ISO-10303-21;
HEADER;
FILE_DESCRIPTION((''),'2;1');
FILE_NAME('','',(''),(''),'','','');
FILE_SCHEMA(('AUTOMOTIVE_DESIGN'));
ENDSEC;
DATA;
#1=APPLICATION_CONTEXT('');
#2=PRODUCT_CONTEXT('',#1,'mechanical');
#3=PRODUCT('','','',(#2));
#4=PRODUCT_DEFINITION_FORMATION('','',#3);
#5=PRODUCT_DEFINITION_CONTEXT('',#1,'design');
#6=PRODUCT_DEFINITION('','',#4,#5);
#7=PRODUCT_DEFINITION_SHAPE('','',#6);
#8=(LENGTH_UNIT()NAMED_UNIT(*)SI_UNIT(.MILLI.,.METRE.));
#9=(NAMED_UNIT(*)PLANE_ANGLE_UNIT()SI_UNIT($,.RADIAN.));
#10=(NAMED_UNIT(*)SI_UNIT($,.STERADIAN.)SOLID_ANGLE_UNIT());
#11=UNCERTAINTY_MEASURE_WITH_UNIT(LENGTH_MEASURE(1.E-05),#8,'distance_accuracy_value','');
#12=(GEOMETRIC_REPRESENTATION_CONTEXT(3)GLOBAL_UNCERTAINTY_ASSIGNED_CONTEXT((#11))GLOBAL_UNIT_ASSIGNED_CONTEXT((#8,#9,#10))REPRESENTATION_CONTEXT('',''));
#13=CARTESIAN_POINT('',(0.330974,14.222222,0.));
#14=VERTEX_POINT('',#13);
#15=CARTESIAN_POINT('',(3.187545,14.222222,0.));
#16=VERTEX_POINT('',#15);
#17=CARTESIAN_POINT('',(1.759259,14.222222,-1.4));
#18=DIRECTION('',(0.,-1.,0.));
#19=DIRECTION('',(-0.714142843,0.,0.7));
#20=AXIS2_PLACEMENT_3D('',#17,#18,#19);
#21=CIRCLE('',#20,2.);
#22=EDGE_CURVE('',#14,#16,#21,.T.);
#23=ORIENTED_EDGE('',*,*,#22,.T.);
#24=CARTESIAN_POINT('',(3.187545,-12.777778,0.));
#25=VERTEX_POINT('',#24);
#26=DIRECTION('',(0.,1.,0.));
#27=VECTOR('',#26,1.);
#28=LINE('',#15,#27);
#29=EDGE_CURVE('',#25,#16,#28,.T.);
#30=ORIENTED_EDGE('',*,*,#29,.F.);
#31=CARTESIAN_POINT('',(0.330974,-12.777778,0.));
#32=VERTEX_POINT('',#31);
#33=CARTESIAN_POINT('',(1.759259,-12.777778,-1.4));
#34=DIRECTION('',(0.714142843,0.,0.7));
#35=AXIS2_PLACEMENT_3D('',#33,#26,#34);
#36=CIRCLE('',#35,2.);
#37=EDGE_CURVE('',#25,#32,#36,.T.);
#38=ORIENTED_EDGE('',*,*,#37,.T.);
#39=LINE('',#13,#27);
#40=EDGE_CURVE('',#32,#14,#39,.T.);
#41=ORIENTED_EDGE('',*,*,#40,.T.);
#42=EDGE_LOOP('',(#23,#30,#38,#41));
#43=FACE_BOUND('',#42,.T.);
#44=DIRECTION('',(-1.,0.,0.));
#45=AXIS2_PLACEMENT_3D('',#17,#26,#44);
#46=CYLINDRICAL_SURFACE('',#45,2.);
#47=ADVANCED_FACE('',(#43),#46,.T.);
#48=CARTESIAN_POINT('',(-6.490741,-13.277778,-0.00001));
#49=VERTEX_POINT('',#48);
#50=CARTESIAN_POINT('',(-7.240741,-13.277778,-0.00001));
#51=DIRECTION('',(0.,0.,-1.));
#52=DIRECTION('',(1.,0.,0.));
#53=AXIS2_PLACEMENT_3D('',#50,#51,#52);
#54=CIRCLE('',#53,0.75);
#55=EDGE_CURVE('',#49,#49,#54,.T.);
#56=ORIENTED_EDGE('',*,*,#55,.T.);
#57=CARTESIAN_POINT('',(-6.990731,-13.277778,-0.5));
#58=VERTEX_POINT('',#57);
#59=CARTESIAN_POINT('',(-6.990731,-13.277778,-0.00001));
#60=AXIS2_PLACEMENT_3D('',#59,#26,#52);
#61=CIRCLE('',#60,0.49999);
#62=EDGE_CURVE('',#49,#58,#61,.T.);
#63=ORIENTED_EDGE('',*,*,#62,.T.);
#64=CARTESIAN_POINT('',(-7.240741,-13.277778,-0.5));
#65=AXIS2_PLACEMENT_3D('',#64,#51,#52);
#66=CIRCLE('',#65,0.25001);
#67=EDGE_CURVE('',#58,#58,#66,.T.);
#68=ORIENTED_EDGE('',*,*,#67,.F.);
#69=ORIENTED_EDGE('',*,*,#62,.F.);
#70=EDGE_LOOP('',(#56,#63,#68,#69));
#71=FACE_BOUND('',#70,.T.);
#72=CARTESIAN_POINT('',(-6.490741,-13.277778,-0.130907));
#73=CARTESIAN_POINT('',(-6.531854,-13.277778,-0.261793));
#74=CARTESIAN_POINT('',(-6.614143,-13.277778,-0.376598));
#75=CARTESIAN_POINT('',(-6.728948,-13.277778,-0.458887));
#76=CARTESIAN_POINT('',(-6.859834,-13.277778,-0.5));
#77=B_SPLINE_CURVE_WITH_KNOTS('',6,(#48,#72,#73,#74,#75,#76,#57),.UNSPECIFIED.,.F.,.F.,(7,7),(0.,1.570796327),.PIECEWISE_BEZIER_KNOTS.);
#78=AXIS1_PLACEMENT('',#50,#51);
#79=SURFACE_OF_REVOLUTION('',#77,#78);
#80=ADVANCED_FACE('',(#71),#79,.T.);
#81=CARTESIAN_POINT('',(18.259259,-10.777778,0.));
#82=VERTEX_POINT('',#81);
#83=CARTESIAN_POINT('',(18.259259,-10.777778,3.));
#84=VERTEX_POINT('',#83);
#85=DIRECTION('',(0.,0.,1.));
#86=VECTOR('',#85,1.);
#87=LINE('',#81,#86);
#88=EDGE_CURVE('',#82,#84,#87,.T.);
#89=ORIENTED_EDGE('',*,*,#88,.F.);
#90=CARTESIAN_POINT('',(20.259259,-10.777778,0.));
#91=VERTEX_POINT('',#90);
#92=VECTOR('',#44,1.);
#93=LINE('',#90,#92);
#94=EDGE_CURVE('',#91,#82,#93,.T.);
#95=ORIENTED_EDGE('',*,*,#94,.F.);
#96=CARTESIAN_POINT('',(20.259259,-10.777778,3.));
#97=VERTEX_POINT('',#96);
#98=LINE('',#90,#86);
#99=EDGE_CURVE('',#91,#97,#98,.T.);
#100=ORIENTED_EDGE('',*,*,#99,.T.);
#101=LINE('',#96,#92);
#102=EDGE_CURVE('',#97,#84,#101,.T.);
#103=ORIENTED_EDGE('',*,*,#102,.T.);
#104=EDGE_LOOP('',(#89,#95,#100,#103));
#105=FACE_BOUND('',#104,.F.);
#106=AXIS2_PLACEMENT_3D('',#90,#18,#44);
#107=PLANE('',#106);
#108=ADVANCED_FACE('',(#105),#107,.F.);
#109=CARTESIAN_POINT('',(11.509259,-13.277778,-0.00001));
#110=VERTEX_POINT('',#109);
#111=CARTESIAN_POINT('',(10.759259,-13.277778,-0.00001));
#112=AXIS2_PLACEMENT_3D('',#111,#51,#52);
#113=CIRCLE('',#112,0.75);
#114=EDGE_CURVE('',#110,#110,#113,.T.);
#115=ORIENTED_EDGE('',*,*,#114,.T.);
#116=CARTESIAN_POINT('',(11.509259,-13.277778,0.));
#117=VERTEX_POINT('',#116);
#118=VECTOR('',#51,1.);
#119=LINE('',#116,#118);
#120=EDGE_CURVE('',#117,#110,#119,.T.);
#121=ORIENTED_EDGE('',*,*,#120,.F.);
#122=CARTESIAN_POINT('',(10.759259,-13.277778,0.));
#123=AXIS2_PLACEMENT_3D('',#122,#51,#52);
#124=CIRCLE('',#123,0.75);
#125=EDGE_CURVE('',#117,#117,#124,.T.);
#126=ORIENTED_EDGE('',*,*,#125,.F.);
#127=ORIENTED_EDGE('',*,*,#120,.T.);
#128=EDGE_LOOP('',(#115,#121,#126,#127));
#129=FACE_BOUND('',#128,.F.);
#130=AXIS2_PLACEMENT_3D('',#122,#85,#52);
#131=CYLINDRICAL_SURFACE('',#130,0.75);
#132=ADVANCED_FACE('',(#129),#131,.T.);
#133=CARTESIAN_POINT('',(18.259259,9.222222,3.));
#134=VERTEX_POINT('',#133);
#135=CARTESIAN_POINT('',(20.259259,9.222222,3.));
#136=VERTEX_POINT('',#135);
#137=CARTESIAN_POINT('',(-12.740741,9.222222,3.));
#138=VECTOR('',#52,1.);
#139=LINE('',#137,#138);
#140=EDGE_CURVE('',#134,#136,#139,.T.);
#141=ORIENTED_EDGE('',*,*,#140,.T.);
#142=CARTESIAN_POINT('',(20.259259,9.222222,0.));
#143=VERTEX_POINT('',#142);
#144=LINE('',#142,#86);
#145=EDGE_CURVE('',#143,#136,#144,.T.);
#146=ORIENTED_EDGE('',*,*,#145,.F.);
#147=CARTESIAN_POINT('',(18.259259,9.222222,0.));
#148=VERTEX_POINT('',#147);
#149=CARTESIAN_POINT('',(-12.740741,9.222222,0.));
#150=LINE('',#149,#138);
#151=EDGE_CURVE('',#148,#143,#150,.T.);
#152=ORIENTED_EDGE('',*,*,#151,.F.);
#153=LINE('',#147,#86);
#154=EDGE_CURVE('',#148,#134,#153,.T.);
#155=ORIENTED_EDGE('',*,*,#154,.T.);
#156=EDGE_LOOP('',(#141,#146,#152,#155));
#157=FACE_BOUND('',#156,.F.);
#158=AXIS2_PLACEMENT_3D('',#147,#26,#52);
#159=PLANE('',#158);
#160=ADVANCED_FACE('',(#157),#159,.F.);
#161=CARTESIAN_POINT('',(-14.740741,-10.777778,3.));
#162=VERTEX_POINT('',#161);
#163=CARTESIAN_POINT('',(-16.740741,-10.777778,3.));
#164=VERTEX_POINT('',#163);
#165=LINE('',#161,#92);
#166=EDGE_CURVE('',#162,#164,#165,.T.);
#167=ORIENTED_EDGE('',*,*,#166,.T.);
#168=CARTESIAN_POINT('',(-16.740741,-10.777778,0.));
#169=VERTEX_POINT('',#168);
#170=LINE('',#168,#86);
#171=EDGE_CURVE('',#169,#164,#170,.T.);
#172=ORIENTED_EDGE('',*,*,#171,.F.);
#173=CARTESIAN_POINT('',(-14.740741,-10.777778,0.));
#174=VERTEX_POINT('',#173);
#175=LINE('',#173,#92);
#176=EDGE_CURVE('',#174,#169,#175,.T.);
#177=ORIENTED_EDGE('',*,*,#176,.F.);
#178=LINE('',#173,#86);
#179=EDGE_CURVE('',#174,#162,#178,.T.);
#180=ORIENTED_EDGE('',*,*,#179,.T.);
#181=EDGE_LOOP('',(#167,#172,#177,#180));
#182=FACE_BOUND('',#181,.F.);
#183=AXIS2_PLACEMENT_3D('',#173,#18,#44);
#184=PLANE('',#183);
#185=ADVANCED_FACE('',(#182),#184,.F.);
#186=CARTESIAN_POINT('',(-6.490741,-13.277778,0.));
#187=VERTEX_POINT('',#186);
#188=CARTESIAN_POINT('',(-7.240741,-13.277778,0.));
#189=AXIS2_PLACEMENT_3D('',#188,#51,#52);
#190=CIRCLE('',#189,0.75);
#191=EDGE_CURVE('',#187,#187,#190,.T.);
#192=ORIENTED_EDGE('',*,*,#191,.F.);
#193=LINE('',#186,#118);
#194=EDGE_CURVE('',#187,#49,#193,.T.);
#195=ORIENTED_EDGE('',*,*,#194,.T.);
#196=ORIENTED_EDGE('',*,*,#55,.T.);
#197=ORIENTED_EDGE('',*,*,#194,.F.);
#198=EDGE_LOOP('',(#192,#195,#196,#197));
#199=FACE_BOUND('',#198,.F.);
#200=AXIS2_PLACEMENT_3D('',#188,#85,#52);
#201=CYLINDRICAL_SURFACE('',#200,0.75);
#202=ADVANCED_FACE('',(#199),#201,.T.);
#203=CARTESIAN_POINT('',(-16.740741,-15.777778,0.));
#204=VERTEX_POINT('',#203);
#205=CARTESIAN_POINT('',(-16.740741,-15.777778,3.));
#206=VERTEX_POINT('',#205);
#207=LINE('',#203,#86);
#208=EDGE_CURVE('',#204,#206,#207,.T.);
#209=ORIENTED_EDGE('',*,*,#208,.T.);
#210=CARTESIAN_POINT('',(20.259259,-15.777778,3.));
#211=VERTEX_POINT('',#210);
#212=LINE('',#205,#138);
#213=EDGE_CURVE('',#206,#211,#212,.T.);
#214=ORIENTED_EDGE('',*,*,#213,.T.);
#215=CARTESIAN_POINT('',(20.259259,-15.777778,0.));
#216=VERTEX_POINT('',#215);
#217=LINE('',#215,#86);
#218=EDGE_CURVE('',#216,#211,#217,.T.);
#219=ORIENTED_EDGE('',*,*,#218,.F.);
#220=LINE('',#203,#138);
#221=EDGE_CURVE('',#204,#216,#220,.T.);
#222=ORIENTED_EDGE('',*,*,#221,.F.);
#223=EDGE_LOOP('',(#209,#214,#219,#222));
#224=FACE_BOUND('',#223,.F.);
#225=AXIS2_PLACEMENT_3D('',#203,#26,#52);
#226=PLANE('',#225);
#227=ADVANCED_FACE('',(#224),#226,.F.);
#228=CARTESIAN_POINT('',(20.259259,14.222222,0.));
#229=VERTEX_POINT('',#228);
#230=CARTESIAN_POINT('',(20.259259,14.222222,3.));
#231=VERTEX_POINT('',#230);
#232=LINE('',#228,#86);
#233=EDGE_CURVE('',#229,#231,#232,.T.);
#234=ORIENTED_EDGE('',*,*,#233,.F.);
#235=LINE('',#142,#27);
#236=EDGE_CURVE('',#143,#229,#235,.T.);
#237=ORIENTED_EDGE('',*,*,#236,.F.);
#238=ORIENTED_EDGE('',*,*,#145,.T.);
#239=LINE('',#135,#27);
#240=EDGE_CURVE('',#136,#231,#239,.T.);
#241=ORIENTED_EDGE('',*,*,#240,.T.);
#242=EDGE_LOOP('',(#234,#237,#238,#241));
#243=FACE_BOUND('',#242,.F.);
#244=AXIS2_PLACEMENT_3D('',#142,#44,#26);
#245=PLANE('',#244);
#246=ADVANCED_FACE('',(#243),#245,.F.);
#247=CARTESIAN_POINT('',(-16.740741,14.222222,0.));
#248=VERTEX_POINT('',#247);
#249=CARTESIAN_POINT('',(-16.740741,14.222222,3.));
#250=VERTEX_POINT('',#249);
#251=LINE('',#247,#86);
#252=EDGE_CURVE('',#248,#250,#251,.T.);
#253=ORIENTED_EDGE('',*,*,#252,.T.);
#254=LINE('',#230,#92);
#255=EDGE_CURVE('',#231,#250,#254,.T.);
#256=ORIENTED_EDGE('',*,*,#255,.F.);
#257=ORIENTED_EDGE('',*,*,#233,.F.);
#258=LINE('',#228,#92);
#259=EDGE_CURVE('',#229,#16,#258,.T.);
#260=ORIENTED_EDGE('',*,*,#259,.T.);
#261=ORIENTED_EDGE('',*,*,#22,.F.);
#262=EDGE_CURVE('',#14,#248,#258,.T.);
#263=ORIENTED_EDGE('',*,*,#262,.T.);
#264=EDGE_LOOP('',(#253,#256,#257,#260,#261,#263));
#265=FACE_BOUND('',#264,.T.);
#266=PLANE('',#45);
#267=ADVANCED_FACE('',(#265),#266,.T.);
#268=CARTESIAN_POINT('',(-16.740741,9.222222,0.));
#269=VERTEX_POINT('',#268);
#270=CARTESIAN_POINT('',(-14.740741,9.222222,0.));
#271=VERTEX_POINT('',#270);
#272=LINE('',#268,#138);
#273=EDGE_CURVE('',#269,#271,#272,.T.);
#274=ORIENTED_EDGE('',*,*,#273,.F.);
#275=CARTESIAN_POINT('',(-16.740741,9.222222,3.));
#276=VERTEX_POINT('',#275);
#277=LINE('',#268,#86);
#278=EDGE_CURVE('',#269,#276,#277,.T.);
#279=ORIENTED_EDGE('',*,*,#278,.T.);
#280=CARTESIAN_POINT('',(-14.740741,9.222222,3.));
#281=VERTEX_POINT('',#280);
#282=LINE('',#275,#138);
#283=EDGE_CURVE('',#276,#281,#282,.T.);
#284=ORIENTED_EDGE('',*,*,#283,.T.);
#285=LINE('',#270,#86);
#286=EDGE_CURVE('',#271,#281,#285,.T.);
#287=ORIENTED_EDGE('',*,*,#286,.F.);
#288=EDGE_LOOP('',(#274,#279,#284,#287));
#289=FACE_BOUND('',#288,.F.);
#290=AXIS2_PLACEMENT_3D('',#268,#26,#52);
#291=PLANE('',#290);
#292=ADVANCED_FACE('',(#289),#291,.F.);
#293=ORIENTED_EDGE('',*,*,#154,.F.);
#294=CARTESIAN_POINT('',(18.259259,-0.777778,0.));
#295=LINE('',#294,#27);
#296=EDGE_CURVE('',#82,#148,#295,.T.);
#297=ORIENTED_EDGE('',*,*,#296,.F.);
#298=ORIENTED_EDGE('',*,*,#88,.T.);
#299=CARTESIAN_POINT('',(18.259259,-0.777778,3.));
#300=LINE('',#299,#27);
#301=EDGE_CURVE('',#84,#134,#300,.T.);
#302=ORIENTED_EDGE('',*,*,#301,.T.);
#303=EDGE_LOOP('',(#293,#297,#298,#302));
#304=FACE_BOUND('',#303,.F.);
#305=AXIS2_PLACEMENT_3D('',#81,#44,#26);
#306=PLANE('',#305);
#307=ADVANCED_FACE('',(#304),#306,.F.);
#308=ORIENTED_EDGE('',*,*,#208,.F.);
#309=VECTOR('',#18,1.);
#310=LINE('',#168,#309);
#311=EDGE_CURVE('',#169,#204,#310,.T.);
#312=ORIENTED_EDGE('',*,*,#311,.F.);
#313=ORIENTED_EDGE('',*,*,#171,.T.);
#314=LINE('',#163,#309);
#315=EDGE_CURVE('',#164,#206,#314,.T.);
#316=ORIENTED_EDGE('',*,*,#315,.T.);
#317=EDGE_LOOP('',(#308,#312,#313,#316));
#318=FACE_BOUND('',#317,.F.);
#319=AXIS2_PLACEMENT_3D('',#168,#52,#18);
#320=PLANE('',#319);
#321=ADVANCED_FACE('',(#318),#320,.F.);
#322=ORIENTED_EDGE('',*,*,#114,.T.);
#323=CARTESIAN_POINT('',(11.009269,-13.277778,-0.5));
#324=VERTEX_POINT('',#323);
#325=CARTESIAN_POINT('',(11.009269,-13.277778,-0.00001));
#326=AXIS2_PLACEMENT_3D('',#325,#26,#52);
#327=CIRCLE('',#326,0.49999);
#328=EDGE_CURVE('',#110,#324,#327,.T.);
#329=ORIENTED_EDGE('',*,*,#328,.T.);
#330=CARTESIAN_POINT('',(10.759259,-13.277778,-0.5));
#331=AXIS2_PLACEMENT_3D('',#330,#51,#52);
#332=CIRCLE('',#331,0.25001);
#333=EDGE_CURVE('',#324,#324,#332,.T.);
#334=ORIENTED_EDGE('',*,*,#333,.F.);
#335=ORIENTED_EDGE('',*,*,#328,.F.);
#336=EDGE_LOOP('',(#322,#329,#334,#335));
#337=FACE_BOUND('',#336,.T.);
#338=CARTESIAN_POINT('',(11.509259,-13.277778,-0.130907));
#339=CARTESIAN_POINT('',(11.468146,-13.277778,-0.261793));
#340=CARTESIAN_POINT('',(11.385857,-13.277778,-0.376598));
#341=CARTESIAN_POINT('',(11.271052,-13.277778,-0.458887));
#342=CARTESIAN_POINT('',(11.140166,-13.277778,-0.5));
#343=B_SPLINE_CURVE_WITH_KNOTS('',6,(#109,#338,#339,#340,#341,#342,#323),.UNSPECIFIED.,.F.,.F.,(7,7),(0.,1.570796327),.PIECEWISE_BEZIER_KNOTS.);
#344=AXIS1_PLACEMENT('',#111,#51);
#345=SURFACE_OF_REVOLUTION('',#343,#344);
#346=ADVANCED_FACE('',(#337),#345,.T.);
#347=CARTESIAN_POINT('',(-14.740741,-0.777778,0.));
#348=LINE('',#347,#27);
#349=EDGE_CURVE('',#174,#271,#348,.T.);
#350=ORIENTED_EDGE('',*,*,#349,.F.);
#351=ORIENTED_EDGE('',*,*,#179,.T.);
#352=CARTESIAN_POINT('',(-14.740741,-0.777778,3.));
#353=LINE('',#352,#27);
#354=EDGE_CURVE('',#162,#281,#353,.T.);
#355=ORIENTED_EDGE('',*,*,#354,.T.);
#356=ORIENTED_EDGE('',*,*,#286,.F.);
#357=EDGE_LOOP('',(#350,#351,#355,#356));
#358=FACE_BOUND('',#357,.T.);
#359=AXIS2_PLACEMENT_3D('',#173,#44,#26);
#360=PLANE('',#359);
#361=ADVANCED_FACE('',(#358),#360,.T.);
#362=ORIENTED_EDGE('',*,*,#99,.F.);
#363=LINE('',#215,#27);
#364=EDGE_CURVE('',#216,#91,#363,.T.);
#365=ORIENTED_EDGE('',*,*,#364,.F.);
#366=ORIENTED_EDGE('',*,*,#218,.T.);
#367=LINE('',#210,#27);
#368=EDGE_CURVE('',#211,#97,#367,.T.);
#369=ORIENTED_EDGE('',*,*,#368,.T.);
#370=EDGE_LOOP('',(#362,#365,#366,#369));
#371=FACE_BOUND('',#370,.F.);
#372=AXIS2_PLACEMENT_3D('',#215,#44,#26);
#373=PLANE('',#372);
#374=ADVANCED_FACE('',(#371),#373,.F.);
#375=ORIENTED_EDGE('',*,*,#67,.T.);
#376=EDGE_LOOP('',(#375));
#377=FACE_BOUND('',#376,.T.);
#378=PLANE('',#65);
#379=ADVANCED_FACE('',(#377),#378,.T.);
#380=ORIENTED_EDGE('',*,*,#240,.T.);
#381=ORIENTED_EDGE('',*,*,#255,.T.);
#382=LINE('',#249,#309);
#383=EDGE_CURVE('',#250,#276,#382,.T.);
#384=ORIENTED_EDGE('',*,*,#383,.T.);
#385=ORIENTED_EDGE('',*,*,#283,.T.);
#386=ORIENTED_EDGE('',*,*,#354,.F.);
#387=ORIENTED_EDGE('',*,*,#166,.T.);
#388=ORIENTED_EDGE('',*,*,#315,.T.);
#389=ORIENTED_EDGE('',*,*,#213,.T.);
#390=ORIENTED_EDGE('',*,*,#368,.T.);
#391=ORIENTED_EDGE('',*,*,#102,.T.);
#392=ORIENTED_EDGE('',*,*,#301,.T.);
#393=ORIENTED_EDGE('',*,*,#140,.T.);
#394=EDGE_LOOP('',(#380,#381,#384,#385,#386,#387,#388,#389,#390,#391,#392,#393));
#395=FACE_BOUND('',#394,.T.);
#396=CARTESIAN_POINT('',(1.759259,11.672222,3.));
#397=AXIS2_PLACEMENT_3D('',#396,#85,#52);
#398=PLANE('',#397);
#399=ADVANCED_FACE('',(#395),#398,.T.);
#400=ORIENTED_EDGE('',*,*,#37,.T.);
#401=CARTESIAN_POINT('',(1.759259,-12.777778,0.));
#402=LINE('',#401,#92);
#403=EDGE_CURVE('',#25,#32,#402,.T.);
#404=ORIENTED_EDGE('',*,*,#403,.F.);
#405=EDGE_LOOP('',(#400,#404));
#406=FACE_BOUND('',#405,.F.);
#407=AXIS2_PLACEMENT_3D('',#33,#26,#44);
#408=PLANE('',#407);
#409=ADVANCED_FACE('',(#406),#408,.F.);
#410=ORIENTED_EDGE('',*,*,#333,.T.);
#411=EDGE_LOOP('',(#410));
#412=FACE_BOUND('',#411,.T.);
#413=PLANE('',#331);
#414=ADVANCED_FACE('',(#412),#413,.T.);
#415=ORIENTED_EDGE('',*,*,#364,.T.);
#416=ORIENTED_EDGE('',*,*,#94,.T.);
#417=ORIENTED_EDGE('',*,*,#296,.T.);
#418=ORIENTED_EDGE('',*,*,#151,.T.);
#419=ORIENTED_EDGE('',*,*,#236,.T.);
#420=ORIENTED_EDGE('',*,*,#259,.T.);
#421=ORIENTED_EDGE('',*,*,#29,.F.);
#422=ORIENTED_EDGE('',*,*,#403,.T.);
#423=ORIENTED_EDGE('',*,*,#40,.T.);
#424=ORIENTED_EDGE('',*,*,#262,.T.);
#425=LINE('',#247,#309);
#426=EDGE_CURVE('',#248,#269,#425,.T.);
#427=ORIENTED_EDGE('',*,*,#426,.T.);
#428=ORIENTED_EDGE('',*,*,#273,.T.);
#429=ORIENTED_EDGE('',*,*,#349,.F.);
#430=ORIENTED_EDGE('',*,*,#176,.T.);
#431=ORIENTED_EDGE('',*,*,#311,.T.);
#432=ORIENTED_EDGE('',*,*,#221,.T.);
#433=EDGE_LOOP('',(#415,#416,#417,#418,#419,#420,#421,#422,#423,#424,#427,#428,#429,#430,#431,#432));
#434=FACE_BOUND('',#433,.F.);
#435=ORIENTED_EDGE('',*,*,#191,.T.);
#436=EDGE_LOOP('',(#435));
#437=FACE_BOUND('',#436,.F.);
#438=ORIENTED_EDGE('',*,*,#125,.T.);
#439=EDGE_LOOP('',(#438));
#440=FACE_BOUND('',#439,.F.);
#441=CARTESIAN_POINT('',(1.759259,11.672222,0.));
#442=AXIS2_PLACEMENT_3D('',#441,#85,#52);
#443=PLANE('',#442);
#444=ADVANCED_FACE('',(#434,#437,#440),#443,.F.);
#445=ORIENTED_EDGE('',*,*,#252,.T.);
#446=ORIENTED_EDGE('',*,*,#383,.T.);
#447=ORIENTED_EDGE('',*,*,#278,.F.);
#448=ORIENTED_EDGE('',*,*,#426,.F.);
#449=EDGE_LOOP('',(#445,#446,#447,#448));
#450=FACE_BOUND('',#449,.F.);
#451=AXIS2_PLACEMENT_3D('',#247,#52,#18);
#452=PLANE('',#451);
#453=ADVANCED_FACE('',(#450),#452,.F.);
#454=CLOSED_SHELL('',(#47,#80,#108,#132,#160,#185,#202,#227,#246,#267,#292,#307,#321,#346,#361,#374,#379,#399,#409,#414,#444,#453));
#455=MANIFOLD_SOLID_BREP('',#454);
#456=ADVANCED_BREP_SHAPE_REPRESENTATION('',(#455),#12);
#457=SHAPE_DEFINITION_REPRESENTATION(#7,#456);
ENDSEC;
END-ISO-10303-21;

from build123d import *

# Parameters (mm, degrees)
F0_W     = 2
F0_H     = 1.5
F0_H_2   = 20
F0_W_2   = 11
F0_W_3   = 7
F1_DEPTH = 3
F3_DEPTH = 26.5
F5_R     = 2
F6_DEPTH = 27
F7_R     = 0.75
F8_DEPTH = 0.5
F9_R     = 0.49999


# Not quite as in the source:
# - a fillet or chamfer is up to 0.001 mm smaller than in the source, because OpenCascade refuses the exact size


with BuildPart() as f1:
    # F0 (on Top) → F1 (new body)
    with BuildSketch(Plane.XY):
        Polygon((-1.7407407407, 9.2222222222), (5.2592592593, 9.2222222222), (16.2592592593, 9.2222222222), (16.2592592593, 10.7222222222), (18.2592592593, 10.7222222222), (18.2592592593, 9.2222222222), (20.2592592593, 9.2222222222), (20.2592592593, 14.2222222222), (-16.7407407407, 14.2222222222), (-16.7407407407, 9.2222222222), (-14.7407407407, 9.2222222222), (-14.7407407407, 10.7222222222), (-12.7407407407, 10.7222222222), (-12.7407407407, 9.2222222222), align=None)
        Polygon((16.2592592593, -10.7777777778), (5.2592592593, -10.7777777778), (-1.7407407407, -10.7777777778), (-12.7407407407, -10.7777777778), (-12.7407407407, -12.2777777778), (-14.7407407407, -12.2777777778), (-14.7407407407, -10.7777777778), (-16.7407407407, -10.7777777778), (-16.7407407407, -15.7777777778), (20.2592592593, -15.7777777778), (20.2592592593, -10.7777777778), (18.2592592593, -10.7777777778), (18.2592592593, -12.2777777778), (16.2592592593, -12.2777777778), align=None)
        with Locations((17.2592592593, 9.9722222222)):
            Rectangle(F0_W, F0_H)
        with Locations((17.2592592593, -0.7777777778)):
            Rectangle(F0_W, F0_H_2)
        with Locations((-13.7407407407, -0.7777777778)):
            Rectangle(F0_W, F0_H_2)
        with Locations((-13.7407407407, 9.9722222222)):
            Rectangle(F0_W, F0_H)
        with Locations((17.2592592593, -11.5277777778)):
            Rectangle(F0_W, F0_H)
        with Locations((-13.7407407407, -11.5277777778)):
            Rectangle(F0_W, F0_H)
        with Locations((-7.2407407407, -0.7777777778)):
            Rectangle(F0_W_2, F0_H_2)
        with Locations((1.7592592593, -0.7777777778)):
            Rectangle(F0_W_3, F0_H_2)
        with Locations((10.7592592593, -0.7777777778)):
            Rectangle(F0_W_2, F0_H_2)
    extrude(amount=F1_DEPTH)

    # F5 (on face) → F6 (join)
    with BuildSketch(Plane(origin=(0, 14.2222222222, 0), x_dir=(-1, 0, 0), z_dir=(0, 1, 0))):
        with Locations((-1.7592592593, -1.4)):
            Circle(F5_R)
    extrude(amount=-F6_DEPTH)

    # F7 (on face) → F8 (join)
    with BuildSketch(Plane(origin=(0, 0, 0), x_dir=(1, 0, 0), z_dir=(0, 0, -1))):
        with Locations((-7.2407407407, 13.2777777778)):
            Circle(F7_R)
        with Locations((10.7592592593, 13.2777777778)):
            Circle(F7_R)
    extrude(amount=F8_DEPTH)

    # F9 (radius 0.5 in the source; OpenCascade refuses exactly that, so slightly less here)
    f9_edges = [f1.edges().sort_by_distance(p)[0] for p in [
        (10.009259, -13.277778, -0.5),
        (-7.990741, -13.277778, -0.5),
    ]]
    fillet(f9_edges, radius=F9_R)


with BuildPart() as f3:
    # F2 (on face) → F3 (new body)
    with BuildSketch(Plane(origin=(0, 14.2222222222, 0), x_dir=(-1, 0, 0), z_dir=(0, 1, 0))):
        with BuildLine():
            ThreePointArc((-1.3930631716, 0), (-0.7580650487, -3.223722123), (1.975, -1.4))
            ThreePointArc((1.975, -1.4), (1.823722123, -0.6419349513), (1.3930631716, 0))
            Line((1.3930631716, 0), (-1.3930631716, 0))
        make_face()
    extrude(amount=-F3_DEPTH)


solid = f1.part
